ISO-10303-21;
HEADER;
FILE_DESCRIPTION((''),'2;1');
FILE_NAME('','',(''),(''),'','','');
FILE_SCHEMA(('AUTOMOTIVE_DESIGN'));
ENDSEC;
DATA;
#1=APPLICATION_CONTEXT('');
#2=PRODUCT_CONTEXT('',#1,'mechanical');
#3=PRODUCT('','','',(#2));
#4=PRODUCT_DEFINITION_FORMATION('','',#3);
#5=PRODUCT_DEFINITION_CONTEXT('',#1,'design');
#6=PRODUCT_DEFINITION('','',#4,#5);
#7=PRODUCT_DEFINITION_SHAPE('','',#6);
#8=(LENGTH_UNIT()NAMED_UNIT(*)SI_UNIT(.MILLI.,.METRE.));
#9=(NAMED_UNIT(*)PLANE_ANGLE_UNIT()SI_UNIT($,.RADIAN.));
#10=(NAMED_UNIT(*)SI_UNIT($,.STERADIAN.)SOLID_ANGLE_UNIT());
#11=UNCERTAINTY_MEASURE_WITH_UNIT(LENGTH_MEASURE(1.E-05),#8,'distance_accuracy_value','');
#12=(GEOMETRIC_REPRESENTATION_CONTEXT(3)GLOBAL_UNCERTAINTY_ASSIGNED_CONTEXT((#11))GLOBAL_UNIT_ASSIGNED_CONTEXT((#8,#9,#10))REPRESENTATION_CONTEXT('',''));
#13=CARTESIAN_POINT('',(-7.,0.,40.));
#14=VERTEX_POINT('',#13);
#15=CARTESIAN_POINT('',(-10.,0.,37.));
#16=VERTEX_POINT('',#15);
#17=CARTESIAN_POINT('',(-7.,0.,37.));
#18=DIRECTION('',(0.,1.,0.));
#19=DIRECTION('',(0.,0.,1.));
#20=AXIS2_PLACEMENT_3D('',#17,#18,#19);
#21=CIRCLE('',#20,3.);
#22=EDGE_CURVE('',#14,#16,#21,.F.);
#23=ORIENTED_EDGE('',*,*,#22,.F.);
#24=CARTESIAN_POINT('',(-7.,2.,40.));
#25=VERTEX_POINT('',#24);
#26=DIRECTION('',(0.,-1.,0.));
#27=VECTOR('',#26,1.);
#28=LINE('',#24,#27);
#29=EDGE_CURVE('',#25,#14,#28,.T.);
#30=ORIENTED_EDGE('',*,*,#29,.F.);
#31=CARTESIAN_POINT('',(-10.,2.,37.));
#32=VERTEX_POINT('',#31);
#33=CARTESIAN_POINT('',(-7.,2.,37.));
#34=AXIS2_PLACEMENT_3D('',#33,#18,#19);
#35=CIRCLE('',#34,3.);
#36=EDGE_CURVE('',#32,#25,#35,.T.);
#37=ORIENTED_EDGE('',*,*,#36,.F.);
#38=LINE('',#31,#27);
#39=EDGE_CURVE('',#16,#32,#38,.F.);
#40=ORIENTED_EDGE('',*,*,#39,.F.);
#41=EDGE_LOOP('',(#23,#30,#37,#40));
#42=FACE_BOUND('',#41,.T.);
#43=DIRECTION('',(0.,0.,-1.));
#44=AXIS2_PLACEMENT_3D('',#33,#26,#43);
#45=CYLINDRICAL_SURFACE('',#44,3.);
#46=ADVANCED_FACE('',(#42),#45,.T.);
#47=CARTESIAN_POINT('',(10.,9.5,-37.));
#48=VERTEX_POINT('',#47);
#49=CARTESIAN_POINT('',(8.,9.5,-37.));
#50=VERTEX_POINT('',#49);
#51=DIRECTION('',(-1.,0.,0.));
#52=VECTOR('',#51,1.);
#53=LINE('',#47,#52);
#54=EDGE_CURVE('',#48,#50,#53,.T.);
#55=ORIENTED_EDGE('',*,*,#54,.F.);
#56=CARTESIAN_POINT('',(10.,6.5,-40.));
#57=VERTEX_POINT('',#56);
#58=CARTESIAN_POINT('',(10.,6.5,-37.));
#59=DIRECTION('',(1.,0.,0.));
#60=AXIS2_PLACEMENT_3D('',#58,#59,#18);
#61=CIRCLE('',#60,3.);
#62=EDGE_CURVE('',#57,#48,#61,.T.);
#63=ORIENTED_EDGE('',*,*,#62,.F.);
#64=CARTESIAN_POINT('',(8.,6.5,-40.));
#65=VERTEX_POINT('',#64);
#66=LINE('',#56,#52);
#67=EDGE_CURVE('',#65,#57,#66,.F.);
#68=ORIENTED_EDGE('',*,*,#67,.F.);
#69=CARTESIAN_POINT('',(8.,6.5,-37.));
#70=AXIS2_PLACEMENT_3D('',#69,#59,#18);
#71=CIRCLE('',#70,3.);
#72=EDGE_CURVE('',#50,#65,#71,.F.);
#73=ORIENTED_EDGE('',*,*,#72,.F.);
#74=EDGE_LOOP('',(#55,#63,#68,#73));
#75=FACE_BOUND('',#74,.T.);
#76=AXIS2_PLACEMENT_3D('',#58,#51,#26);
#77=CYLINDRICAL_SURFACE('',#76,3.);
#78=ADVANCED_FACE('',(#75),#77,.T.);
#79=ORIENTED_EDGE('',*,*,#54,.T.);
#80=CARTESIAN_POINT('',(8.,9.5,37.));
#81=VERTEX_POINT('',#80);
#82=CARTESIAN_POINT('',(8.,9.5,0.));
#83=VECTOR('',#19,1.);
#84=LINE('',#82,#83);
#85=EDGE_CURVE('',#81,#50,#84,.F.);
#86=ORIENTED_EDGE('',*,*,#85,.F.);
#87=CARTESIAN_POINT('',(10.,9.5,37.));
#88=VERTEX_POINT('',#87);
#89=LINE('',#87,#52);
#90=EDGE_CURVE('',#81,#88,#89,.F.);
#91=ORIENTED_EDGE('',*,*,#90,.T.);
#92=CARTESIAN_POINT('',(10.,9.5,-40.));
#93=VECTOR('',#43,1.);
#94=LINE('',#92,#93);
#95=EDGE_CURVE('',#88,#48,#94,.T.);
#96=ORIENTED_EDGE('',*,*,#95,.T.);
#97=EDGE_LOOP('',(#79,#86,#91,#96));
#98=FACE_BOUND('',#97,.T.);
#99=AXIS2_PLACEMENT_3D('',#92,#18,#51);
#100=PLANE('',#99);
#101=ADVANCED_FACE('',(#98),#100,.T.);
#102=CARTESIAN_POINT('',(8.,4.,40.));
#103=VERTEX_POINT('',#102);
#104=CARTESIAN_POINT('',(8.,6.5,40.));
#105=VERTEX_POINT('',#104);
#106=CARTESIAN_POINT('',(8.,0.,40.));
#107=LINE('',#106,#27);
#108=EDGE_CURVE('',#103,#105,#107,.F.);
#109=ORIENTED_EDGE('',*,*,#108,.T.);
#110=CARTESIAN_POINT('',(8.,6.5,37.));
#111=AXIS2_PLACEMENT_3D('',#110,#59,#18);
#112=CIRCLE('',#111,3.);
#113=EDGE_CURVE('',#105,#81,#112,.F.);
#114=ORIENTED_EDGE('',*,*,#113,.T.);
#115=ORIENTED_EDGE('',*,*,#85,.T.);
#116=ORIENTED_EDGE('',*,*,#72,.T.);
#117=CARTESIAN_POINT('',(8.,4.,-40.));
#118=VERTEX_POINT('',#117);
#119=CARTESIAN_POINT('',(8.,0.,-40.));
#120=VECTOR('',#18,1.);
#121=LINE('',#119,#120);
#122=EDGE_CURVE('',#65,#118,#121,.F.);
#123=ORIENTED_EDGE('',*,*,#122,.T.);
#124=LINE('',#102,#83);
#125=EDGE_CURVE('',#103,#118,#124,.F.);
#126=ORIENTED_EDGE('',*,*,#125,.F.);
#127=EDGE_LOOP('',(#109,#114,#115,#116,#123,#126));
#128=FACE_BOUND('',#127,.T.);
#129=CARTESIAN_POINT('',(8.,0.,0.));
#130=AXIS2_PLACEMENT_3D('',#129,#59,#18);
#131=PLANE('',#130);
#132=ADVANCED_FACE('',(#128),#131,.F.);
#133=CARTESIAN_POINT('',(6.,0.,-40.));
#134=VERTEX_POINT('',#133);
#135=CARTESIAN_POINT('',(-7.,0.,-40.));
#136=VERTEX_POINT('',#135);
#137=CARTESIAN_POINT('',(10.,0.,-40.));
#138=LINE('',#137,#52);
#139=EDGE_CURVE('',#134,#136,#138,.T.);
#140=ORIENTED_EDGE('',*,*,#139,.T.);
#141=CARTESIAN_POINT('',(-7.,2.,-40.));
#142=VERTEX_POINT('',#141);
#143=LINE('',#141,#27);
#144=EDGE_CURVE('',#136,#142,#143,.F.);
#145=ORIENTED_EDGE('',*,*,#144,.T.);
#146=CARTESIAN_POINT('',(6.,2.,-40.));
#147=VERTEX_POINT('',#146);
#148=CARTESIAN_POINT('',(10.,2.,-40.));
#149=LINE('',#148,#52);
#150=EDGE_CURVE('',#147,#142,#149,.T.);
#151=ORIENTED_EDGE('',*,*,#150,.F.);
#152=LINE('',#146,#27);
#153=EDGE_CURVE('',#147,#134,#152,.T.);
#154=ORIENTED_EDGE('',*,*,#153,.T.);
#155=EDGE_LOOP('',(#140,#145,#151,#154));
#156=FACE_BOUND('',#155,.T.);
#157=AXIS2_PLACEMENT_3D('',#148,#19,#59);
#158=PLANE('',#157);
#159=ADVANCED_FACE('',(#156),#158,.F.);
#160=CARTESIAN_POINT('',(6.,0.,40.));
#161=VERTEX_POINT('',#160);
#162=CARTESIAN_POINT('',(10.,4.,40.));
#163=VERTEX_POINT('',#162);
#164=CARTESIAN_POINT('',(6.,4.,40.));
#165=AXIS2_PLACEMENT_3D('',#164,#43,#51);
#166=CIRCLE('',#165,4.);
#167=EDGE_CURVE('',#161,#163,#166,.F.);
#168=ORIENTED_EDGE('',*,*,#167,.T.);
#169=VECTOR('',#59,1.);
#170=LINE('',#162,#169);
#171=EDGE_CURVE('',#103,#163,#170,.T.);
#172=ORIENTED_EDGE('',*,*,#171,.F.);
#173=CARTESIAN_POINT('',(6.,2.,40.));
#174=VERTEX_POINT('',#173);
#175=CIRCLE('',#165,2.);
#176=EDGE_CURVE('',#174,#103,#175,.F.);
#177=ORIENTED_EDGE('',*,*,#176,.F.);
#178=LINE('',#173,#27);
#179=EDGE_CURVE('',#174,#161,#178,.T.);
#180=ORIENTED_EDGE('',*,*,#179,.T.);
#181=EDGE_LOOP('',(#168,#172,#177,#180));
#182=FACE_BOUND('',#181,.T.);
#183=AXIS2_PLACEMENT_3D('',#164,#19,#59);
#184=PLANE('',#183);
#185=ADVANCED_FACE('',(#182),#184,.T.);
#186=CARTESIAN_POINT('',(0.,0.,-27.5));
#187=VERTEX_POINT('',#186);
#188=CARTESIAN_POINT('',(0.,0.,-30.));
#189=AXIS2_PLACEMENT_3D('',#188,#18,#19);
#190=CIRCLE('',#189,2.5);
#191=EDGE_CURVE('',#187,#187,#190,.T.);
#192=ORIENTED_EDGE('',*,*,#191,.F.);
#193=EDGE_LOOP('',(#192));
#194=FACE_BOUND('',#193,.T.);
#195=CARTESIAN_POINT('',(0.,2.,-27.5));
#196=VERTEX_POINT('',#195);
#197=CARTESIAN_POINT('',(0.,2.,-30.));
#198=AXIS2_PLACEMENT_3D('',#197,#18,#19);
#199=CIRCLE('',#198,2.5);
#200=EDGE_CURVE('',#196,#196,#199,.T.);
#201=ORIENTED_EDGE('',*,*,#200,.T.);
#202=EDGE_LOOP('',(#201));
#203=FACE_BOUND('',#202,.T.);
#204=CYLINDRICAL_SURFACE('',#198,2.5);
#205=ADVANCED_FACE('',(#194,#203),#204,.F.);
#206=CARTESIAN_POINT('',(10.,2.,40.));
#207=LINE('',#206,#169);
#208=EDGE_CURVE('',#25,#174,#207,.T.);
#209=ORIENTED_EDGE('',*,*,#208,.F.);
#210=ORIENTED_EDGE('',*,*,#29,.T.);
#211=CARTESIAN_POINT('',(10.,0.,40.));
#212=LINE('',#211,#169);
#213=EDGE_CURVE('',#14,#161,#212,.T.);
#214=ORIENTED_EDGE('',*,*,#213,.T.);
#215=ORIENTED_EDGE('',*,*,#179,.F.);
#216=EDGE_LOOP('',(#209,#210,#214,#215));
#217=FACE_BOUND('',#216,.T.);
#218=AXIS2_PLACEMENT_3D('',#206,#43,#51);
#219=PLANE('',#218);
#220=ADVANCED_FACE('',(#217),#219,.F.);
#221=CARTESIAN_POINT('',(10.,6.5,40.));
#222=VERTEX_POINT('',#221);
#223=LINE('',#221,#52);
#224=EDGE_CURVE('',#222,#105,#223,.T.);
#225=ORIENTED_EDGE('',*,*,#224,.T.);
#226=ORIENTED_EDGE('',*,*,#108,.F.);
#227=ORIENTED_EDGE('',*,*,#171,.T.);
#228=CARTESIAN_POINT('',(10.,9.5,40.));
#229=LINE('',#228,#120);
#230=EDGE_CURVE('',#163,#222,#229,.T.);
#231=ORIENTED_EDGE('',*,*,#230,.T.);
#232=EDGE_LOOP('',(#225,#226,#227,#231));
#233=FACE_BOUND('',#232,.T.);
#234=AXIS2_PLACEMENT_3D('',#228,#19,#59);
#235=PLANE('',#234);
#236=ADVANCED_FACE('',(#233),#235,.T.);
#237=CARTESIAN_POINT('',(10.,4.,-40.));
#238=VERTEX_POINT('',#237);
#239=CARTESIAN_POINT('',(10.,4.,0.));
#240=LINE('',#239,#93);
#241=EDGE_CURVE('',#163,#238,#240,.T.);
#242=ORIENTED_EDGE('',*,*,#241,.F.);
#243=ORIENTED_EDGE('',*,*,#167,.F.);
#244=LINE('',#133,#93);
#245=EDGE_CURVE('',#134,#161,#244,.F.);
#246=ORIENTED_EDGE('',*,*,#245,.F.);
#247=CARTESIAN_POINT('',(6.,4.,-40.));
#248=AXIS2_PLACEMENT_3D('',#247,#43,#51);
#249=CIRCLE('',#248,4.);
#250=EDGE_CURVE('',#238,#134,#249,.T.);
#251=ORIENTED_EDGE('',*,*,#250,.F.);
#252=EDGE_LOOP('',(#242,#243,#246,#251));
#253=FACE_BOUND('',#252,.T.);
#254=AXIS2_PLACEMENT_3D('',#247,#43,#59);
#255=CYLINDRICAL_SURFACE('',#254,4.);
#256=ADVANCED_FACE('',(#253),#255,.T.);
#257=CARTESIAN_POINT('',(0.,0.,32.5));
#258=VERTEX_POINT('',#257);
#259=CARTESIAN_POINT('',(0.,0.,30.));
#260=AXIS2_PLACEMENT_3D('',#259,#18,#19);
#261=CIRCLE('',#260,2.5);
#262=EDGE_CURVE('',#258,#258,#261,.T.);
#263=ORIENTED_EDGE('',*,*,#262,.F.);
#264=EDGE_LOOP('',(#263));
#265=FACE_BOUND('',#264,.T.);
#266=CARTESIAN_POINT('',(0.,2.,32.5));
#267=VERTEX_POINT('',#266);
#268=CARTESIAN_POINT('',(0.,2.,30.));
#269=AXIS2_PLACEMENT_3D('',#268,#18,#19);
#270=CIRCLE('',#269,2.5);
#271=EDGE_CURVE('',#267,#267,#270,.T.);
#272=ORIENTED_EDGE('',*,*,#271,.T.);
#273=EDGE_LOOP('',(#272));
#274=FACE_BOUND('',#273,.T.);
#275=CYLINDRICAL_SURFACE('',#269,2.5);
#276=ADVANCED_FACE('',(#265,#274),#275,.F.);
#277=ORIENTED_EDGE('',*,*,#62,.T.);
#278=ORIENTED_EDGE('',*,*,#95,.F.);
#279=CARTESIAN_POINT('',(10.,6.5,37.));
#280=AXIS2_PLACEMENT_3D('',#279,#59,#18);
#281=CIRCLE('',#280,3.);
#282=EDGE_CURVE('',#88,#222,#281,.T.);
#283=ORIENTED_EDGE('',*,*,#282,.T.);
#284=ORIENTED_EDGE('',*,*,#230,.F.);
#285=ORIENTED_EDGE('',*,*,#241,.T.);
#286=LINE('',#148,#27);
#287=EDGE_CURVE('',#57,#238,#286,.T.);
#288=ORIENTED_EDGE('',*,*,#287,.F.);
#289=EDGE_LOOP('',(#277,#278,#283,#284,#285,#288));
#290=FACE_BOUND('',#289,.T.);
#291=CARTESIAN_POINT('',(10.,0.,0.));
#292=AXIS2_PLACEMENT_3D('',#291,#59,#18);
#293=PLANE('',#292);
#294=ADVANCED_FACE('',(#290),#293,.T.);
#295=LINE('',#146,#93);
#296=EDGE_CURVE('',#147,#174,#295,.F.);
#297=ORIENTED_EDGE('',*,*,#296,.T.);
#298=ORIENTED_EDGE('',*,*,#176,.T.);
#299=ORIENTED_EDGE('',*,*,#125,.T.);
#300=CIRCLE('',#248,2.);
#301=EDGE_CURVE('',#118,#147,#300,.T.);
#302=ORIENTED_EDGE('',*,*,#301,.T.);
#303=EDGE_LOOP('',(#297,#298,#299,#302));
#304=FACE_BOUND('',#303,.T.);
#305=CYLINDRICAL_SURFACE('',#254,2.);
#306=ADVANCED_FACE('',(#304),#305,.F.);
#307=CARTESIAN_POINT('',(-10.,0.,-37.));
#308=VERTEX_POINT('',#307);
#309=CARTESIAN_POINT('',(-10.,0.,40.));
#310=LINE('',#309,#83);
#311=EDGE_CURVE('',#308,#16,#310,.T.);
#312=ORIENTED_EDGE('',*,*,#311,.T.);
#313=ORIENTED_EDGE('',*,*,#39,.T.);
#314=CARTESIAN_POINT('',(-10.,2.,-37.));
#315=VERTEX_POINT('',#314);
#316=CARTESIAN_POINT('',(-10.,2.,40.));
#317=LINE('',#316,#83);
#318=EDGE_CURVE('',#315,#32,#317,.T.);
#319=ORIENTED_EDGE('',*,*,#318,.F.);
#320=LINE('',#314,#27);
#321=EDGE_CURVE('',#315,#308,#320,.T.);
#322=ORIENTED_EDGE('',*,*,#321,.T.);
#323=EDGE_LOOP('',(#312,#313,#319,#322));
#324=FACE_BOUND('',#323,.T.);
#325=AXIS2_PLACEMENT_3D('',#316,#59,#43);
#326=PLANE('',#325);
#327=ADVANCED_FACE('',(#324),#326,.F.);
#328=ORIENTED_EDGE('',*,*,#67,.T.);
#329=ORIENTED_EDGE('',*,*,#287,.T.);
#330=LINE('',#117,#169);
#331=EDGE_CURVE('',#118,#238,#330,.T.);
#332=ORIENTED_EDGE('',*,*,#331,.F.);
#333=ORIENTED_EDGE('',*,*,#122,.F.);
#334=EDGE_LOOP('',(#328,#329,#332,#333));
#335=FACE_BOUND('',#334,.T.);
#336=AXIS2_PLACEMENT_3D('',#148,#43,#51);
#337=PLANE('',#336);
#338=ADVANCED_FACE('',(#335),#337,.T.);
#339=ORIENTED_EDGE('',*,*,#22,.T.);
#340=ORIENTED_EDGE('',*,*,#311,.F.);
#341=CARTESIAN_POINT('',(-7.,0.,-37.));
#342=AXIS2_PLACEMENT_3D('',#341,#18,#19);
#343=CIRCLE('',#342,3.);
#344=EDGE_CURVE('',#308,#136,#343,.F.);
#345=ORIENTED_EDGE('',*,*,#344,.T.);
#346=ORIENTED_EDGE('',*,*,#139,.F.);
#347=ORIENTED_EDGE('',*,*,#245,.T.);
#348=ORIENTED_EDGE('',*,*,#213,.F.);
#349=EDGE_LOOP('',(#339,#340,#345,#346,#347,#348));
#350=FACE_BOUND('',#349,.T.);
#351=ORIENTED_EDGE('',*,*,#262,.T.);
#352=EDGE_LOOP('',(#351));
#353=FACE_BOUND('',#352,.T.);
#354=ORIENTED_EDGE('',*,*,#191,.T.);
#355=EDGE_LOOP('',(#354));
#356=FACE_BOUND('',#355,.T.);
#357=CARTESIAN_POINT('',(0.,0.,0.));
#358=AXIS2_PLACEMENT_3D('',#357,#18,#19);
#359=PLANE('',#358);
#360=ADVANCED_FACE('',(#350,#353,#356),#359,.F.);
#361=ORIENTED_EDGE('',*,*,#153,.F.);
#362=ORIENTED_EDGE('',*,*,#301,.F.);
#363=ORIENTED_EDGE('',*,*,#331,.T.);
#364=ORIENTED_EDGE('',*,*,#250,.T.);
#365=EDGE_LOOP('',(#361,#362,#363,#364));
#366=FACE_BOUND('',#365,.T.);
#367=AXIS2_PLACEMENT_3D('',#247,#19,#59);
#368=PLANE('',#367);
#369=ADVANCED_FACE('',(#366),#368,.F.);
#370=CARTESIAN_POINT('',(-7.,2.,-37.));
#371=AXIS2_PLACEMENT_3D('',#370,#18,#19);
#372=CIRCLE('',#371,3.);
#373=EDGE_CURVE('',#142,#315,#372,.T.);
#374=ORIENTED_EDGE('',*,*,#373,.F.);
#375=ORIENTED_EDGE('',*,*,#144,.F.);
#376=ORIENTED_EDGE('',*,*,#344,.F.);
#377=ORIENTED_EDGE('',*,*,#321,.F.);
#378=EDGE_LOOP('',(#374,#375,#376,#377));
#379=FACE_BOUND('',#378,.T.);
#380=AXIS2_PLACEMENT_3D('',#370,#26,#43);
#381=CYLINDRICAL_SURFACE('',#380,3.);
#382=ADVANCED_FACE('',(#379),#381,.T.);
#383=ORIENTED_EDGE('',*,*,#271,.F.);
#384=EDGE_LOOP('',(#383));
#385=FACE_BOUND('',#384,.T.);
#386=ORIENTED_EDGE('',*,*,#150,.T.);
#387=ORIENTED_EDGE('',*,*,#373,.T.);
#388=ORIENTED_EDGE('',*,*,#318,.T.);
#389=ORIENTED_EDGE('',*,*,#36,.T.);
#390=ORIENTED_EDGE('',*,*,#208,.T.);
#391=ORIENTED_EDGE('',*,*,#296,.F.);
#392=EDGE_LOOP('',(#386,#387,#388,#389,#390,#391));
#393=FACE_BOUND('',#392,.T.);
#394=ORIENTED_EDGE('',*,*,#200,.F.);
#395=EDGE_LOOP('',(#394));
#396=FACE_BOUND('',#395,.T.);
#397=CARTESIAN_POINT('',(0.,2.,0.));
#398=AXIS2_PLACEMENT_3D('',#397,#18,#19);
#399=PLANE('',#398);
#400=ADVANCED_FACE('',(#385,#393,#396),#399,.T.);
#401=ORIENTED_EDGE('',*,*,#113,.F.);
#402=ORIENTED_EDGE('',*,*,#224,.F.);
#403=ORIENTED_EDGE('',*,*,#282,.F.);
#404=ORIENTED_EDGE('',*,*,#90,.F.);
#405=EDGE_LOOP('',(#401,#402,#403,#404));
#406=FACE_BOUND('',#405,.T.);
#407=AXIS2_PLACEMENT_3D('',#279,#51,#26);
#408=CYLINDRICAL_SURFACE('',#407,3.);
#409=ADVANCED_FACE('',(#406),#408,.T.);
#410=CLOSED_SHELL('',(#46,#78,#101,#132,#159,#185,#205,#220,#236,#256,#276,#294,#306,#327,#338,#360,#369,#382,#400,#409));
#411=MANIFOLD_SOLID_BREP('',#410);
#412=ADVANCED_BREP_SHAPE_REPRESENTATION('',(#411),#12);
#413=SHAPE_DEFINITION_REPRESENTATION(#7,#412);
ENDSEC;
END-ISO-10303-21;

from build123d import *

# Parameters (mm, degrees)
SKETCH1_W                    = 20
SKETCH1_H                    = 80
BASE_FLANGE1_DEPTH           = 2
EDGE_FLANGE1_STRIP_W         = 12
EDGE_FLANGE1_STRIP_H         = 2
EDGE_FLANGE1_STRIP_CUT_DEPTH = 80
EDGE_FLANGE1_DEPTH           = 80
F_5_0MM_DOWEL_HOLE1_D        = 5
FILLET1_R                    = 3


# Sheet-metal steps are written as plain solids
with BuildPart() as part:
    # Sketch1 → Base-Flange1 (new body)
    with BuildSketch(Plane(origin=(0, 0, 0), x_dir=(1, 0, 0), z_dir=(0, 1, 0))):
        Rectangle(SKETCH1_W, SKETCH1_H)
    extrude(amount=BASE_FLANGE1_DEPTH)

    # Edge-Flange1 strip (across the edge) → Edge-Flange1 strip cut (cut)
    with BuildSketch(Plane(origin=(10, 2, 40), x_dir=(-1, 0, 0), z_dir=(0, 0, -1))):
        with Locations((-2, -1)):
            Rectangle(EDGE_FLANGE1_STRIP_W, EDGE_FLANGE1_STRIP_H)
    extrude(amount=EDGE_FLANGE1_STRIP_CUT_DEPTH, mode=Mode.SUBTRACT)

    # Edge-Flange1 section (across the edge) → Edge-Flange1 (add)
    with BuildSketch(Plane(origin=(10, 2, 40), x_dir=(-1, 0, 0), z_dir=(0, 0, -1))):
        with BuildLine():
            Line((0, 2), (0, 7.5))
            Line((0, 7.5), (2, 7.5))
            Line((2, 7.5), (2, 2))
            ThreePointArc((2, 2), (2.585786438, 0.585786438), (4, 0))
            Line((4, 0), (4, -2))
            ThreePointArc((4, -2), (1.171572875, -0.828427125), (0, 2))
        make_face()
    extrude(amount=EDGE_FLANGE1_DEPTH)

    # Ø5.0mm Dowel Hole1 (through all)
    with Locations(Plane(origin=(0, 2, 0), x_dir=(1, 0, 0), z_dir=(0, 1, 0))):
        with Locations((0, 30), (0, -30)):
            Hole(F_5_0MM_DOWEL_HOLE1_D / 2)

    # Fillet1
    fillet1_edges = [part.edges().sort_by_distance(p)[0] for p in [
        (9, 9.5, 40),
        (9, 9.5, -40),
        (-10, 1, -40),
        (-10, 1, 40),
    ]]
    fillet(fillet1_edges, radius=FILLET1_R)


solid = part.part
